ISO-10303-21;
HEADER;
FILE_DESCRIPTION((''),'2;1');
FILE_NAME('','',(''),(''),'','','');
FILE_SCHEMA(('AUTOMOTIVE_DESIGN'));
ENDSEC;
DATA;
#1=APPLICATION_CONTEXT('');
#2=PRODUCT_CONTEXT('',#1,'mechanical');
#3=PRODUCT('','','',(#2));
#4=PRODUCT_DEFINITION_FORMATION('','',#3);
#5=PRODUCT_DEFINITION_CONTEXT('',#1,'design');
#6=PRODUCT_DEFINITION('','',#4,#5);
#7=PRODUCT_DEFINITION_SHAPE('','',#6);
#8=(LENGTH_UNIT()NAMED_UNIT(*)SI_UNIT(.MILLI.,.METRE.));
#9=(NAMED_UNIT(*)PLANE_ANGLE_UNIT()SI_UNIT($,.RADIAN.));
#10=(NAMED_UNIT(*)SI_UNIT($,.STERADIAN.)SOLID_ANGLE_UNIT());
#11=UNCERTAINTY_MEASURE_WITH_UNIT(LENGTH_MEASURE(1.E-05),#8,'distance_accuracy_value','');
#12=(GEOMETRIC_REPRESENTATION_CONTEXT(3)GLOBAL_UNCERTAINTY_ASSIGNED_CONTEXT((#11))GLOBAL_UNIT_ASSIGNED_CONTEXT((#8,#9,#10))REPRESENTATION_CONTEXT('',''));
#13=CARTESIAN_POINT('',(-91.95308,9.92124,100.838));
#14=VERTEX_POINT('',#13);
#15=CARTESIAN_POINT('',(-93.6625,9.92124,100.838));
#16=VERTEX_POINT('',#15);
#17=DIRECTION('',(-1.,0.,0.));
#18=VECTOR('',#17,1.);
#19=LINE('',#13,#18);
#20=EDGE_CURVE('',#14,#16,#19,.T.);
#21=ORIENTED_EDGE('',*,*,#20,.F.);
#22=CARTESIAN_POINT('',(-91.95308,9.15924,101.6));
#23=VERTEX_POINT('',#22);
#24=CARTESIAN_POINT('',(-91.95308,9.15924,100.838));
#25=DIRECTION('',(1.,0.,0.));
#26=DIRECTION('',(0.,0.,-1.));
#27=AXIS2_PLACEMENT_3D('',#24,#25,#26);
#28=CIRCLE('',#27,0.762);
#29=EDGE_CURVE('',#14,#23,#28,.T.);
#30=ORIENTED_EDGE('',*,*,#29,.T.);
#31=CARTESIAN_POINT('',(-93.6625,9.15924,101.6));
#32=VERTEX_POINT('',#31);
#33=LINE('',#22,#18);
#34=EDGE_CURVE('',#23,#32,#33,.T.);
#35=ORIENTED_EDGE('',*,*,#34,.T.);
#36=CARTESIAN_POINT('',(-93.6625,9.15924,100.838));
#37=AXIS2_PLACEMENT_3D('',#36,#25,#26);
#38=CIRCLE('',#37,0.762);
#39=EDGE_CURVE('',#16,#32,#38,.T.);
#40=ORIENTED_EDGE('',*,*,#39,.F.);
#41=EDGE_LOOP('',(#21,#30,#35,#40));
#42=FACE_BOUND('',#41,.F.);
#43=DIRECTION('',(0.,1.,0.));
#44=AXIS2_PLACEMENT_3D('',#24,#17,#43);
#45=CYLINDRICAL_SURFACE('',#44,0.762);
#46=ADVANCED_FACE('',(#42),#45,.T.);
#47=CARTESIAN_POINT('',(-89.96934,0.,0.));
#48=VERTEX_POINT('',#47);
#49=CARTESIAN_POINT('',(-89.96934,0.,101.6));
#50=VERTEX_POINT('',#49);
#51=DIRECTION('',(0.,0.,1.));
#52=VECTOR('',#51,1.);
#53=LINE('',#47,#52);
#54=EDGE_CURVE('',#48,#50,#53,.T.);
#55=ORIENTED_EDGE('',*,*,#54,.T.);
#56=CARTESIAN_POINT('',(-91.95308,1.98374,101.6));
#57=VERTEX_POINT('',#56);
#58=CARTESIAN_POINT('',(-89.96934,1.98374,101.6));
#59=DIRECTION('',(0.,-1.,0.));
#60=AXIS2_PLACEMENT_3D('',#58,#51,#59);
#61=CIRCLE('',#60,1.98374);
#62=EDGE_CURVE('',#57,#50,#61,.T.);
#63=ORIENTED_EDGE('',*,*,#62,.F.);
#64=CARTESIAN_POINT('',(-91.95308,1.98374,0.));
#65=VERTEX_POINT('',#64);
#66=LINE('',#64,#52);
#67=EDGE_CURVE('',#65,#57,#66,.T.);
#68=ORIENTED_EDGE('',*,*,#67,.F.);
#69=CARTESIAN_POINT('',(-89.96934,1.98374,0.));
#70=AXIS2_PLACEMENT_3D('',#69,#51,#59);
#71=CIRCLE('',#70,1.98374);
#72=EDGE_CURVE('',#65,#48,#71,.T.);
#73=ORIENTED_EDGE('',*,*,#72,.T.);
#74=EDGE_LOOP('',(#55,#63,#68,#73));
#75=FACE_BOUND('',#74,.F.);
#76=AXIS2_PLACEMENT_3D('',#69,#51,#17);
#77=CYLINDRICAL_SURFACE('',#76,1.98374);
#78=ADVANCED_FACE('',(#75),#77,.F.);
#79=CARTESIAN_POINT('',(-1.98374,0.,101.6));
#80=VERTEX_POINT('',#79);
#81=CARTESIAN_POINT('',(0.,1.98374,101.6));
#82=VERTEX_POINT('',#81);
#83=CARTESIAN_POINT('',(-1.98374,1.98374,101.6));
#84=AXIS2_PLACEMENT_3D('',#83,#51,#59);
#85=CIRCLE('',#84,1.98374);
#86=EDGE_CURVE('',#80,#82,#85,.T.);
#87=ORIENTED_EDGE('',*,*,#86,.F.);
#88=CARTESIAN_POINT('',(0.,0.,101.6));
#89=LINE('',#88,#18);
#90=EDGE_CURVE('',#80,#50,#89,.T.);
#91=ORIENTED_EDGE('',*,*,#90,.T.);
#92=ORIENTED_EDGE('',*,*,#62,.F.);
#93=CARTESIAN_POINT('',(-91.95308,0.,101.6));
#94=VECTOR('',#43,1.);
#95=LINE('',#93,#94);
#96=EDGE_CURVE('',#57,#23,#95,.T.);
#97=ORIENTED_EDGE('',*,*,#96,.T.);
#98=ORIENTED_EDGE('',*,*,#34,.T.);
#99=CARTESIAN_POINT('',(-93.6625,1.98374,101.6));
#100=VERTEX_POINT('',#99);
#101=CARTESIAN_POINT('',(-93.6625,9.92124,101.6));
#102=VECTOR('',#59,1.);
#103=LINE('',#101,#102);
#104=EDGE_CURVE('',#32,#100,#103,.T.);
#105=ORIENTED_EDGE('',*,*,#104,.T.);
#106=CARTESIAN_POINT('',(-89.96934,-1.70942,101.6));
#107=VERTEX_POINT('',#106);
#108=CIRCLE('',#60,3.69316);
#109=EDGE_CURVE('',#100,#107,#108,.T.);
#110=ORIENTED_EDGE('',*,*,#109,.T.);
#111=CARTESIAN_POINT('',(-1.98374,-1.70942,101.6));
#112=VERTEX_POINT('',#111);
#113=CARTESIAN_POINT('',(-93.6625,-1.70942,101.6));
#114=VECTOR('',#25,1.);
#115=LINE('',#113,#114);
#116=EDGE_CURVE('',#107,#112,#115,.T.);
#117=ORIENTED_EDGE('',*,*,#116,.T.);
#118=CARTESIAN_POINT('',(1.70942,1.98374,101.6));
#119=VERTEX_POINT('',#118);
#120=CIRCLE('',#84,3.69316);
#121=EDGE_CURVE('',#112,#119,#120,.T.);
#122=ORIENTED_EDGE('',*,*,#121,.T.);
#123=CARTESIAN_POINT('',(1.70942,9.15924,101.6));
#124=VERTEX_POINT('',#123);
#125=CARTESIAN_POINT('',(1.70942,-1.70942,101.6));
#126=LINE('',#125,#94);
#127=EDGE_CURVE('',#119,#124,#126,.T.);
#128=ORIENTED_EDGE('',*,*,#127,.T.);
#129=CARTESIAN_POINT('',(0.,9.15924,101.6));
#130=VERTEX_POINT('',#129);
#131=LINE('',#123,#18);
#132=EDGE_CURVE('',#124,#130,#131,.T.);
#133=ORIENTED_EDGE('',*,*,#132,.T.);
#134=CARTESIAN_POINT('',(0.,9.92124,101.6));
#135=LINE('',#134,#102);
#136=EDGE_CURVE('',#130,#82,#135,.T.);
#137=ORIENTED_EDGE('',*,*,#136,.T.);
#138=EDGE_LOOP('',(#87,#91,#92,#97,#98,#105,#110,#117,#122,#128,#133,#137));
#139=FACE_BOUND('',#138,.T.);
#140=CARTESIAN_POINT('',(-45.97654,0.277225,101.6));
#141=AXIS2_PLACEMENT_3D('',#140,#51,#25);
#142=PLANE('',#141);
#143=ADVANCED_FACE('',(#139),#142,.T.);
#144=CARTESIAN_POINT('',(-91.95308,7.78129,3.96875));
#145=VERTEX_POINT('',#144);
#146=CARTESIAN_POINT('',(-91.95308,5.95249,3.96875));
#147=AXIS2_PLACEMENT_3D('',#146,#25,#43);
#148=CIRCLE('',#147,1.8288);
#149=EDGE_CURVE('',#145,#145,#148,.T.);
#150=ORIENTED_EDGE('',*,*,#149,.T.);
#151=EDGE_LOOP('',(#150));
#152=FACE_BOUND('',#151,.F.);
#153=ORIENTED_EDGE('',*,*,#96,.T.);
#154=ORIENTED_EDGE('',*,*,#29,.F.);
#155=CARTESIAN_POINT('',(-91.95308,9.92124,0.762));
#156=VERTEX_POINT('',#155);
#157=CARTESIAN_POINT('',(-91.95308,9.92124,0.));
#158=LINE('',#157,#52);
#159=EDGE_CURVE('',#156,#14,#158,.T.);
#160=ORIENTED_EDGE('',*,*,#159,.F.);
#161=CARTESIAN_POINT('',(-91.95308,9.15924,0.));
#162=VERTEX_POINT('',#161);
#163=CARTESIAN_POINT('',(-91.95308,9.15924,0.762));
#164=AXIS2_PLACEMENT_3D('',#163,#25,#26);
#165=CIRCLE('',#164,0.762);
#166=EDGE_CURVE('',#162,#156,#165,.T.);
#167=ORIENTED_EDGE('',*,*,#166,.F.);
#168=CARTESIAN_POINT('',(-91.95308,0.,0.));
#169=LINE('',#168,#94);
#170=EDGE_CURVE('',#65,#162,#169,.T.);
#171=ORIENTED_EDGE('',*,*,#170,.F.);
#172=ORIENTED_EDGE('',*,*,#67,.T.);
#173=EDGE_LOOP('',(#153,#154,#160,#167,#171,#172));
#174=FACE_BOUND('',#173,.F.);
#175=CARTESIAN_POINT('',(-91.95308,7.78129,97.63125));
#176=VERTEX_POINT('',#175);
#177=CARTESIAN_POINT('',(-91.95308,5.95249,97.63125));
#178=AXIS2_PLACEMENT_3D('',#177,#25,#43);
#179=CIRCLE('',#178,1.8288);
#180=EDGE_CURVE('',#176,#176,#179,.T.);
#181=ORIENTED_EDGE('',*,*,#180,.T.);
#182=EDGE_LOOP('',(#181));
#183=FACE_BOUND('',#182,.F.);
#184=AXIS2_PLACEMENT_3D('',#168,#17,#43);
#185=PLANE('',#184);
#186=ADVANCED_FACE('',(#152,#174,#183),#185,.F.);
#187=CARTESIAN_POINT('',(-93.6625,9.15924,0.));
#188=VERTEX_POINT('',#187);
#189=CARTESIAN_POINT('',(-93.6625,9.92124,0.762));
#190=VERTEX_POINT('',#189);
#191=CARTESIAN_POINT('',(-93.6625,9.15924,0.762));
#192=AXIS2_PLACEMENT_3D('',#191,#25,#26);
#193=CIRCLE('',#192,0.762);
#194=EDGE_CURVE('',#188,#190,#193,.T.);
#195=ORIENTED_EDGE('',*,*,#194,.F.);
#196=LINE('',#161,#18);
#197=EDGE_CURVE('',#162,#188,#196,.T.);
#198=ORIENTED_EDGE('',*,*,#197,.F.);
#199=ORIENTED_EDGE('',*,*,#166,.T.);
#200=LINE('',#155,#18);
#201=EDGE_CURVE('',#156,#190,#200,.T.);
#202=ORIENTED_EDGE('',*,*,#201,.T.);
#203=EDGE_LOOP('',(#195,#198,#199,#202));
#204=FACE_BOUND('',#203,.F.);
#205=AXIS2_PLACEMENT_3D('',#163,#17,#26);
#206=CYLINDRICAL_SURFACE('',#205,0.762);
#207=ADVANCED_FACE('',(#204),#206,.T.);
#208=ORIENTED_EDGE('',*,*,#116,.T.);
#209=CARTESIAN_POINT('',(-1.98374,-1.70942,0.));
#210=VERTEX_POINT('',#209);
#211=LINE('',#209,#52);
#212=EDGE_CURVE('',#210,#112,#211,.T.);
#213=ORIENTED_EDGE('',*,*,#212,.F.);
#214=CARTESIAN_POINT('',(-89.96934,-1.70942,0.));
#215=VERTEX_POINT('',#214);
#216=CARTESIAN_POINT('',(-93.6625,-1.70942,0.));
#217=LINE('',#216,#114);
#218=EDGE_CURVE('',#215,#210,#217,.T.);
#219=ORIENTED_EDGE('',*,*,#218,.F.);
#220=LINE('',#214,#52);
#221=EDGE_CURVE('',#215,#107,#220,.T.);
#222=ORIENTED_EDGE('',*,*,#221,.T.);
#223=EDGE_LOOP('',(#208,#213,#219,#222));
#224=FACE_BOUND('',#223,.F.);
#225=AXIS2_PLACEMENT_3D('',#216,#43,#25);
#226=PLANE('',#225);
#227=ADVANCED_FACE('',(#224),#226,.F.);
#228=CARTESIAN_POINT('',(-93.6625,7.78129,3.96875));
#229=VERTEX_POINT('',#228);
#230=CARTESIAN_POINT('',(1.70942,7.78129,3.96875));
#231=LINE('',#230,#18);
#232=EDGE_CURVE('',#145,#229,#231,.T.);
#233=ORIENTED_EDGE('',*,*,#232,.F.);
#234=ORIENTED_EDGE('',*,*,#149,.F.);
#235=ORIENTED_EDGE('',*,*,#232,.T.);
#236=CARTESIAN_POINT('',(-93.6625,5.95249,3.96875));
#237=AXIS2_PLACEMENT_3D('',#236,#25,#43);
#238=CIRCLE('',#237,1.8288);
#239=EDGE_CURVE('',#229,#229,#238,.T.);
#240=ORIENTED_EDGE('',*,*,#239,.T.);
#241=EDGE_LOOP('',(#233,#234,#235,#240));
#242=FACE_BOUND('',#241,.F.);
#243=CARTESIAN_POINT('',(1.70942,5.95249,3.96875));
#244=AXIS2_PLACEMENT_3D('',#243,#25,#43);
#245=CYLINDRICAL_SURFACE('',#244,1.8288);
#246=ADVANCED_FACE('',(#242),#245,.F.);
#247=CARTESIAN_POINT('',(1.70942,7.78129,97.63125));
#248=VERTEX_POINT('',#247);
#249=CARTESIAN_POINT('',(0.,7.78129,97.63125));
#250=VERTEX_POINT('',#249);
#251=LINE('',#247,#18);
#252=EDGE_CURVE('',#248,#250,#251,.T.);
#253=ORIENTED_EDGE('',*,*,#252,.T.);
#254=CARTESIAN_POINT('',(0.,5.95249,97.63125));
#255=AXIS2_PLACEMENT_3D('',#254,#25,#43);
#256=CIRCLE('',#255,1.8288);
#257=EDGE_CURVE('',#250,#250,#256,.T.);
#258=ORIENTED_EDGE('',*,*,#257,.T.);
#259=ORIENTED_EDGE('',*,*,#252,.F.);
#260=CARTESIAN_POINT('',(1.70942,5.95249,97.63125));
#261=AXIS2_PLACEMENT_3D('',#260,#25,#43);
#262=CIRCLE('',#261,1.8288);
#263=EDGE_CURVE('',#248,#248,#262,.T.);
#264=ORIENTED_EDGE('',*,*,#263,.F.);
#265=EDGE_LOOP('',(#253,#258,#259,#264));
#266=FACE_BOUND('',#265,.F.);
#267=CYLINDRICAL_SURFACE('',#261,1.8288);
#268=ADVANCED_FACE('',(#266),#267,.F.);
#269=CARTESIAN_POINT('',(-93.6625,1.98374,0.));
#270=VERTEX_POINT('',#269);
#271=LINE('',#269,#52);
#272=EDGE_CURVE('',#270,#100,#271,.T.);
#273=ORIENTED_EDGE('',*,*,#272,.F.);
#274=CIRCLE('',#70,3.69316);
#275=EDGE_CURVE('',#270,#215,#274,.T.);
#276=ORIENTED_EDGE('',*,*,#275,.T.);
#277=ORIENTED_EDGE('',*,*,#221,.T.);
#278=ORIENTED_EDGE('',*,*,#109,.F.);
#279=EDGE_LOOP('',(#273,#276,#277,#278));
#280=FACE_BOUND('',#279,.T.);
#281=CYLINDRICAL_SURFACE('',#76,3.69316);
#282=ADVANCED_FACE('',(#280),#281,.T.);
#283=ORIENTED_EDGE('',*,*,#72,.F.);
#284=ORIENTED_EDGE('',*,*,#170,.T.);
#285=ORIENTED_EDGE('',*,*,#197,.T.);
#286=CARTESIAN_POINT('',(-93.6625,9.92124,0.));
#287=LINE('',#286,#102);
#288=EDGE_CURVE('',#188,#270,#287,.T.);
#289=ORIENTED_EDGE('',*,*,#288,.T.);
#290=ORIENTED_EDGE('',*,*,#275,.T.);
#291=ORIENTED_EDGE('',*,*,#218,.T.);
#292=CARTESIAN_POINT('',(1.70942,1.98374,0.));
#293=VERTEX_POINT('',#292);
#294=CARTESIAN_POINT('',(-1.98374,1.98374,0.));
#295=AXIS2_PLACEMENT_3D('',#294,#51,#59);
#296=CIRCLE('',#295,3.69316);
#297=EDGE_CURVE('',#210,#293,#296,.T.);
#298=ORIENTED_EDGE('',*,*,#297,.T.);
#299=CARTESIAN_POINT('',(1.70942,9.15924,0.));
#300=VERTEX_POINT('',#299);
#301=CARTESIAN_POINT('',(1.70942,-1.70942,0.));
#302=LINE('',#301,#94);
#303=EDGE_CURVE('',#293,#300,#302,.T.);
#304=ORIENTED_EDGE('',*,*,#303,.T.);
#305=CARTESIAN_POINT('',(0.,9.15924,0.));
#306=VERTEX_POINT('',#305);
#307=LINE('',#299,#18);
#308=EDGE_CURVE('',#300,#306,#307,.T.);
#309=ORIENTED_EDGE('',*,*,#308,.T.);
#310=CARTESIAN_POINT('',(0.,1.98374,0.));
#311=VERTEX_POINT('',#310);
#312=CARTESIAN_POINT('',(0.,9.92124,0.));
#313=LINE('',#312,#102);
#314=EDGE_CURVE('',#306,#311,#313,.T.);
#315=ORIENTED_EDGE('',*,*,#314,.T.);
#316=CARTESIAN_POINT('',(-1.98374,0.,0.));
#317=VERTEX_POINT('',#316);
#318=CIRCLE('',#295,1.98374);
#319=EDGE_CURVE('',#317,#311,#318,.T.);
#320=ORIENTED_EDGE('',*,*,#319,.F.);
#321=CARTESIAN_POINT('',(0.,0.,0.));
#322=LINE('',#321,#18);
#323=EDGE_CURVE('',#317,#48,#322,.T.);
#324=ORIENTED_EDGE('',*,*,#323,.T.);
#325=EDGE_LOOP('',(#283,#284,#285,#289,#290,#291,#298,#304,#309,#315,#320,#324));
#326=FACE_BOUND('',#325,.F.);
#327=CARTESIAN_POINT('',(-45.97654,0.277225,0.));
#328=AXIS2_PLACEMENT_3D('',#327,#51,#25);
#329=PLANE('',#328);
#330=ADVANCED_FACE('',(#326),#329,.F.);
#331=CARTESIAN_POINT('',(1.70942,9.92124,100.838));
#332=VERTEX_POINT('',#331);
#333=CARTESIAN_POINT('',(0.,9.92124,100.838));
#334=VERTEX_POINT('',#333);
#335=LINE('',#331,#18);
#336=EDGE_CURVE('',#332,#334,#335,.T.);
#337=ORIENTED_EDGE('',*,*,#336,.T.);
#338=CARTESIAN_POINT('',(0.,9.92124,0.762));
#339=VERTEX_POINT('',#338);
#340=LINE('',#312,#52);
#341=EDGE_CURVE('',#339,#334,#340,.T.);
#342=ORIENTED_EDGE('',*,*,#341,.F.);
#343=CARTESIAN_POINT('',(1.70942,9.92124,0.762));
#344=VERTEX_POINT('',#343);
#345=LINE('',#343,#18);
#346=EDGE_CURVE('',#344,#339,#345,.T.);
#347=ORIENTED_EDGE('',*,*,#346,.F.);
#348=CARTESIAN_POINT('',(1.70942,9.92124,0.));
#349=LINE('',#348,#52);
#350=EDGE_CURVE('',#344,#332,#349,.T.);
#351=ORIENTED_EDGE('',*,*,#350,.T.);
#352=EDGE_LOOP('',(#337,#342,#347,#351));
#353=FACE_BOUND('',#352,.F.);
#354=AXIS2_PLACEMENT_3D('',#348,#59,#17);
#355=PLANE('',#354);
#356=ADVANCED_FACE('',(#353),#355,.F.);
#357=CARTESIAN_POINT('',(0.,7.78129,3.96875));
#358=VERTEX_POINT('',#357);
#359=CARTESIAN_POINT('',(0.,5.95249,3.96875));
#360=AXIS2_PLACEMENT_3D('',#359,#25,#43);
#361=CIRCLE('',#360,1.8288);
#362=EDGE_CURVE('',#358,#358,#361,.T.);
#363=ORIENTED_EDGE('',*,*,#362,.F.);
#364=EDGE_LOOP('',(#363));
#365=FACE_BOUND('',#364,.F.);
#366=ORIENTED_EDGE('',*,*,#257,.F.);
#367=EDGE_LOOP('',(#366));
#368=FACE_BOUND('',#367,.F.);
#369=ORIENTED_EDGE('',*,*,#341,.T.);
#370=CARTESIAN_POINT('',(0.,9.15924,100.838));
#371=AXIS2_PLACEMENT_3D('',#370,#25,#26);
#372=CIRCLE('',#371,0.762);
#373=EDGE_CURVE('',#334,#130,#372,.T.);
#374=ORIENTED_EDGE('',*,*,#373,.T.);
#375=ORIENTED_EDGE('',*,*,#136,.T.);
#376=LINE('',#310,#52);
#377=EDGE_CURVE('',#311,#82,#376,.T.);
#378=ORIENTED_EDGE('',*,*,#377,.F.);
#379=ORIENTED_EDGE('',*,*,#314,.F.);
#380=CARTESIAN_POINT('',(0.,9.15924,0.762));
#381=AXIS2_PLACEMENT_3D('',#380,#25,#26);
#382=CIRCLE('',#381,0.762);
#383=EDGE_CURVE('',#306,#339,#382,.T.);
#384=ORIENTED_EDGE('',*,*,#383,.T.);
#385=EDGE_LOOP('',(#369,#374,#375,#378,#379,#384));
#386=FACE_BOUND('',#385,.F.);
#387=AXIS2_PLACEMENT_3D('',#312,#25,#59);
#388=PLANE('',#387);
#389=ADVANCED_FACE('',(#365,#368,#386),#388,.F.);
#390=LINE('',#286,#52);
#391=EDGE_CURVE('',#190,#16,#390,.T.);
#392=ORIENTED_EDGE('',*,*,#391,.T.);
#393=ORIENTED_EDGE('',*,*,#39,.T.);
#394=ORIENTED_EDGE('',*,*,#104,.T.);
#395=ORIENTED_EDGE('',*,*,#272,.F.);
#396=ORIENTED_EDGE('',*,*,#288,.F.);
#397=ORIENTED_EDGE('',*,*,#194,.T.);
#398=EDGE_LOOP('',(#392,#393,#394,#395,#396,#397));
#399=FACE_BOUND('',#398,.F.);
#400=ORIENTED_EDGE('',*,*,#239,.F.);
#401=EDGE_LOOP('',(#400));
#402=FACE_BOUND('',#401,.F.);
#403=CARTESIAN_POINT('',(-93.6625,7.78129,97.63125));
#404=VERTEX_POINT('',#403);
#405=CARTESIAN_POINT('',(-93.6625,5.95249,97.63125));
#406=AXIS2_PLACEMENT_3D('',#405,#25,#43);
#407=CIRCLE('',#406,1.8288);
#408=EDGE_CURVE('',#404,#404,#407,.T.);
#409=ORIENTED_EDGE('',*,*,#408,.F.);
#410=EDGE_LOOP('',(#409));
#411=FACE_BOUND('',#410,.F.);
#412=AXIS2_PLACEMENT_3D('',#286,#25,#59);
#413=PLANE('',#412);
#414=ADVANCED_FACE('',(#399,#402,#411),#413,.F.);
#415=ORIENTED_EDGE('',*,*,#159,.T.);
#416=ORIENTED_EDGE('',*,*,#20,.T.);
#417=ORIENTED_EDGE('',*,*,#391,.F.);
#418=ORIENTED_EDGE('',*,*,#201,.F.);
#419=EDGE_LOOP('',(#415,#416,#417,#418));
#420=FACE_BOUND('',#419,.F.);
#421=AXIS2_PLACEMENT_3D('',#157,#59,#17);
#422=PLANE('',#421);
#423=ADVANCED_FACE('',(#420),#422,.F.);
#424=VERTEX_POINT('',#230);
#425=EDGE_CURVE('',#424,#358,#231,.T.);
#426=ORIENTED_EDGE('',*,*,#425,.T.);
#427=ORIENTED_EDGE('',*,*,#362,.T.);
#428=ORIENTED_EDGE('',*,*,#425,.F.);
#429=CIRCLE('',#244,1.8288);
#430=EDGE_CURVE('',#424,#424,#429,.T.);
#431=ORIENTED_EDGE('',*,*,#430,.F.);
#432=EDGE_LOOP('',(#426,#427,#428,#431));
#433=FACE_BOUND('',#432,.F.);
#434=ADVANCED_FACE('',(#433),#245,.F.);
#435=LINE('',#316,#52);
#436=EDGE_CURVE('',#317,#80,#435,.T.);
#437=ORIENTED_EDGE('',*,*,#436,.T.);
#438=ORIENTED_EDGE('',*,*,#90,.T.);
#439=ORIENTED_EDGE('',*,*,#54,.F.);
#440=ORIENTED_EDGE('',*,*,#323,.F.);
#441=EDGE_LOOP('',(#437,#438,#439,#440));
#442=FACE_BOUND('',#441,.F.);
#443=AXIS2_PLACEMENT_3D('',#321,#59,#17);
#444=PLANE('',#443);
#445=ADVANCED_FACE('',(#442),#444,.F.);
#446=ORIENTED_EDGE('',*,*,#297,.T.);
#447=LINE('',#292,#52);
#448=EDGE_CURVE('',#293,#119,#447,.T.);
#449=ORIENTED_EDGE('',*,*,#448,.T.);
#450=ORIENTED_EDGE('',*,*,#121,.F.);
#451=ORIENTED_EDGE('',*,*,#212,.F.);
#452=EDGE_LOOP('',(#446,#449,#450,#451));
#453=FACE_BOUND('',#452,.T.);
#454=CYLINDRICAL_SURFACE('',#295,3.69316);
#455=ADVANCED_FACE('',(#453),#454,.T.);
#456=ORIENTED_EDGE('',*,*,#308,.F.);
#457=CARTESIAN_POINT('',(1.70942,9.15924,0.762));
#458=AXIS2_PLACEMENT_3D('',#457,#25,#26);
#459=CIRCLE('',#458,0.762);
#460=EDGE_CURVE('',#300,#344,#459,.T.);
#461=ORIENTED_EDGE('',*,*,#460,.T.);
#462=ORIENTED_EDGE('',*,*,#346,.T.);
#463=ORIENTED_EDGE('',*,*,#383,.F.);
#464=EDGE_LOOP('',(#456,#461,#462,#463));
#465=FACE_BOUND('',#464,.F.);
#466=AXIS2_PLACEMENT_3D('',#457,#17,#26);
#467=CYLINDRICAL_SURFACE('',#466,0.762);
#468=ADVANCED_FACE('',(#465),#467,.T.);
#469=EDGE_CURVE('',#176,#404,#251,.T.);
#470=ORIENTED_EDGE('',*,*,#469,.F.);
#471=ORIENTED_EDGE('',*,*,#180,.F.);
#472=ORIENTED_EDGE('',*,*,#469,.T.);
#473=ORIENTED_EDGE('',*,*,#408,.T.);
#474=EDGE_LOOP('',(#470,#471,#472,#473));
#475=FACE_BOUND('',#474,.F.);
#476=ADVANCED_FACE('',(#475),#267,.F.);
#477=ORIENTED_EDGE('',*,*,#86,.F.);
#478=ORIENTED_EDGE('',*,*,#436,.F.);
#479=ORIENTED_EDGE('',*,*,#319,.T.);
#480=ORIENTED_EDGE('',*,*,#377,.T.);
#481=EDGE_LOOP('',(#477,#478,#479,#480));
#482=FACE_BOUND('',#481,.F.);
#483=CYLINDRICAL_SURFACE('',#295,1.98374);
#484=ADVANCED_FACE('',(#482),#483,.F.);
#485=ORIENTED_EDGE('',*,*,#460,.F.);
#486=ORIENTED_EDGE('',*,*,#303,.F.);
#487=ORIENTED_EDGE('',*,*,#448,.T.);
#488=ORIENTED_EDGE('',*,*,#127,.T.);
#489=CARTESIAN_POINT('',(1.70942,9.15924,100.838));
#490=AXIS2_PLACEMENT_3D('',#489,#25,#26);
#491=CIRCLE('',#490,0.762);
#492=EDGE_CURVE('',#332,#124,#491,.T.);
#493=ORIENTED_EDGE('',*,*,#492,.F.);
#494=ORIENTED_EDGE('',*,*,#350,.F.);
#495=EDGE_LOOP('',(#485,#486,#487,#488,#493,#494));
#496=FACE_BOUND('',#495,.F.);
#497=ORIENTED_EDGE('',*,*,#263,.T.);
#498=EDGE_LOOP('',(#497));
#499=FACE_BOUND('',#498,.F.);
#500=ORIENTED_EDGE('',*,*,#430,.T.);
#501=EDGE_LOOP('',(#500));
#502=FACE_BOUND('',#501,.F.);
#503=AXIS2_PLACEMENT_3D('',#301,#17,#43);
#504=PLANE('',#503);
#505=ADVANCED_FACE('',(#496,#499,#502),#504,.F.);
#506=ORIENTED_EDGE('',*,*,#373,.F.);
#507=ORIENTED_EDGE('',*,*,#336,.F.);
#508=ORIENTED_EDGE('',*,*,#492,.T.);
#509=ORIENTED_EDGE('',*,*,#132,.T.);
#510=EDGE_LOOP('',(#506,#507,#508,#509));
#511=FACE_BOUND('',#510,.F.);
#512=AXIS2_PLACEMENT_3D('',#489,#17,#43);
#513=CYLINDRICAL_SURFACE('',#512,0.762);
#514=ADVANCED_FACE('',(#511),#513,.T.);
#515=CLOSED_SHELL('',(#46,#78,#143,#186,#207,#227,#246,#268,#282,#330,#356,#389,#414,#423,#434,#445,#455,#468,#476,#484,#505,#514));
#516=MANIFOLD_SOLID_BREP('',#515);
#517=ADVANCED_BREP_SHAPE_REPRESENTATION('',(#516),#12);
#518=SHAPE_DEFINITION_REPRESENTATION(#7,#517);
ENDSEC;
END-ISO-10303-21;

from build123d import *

# Parameters (mm, degrees)
F1_DEPTH = 101.6
F2_R     = 3.69316
F3_R     = 1.98374
F4_R     = 1.8288
F5_DEPTH = 95.37192
F6_R     = 0.762


with BuildPart() as f1:
    # F0 (on Top) → F1 (new body)
    with BuildSketch(Plane.XY):
        Polygon((0, 9.92124), (0, 0), (-91.95308, 0), (-91.95308, 9.92124), (-93.6625, 9.92124), (-93.6625, -1.70942), (1.70942, -1.70942), (1.70942, 9.92124), align=None)
    extrude(amount=F1_DEPTH)

    # F2
    f2_edges = [f1.edges().sort_by_distance(p)[0] for p in [
        (1.70942, -1.70942, 50.8),
        (-93.6625, -1.70942, 50.8),
    ]]
    fillet(f2_edges, radius=F2_R)

    # F3
    f3_edges = [f1.edges().sort_by_distance(p)[0] for p in [
        (0, 0, 50.8),
        (-91.95308, 0, 50.8),
    ]]
    fillet(f3_edges, radius=F3_R)

    # F4 (on face) → F5 (cut, through all)
    with BuildSketch(Plane.YZ.offset(1.70942)):
        with Locations((5.95249, 97.63125)):
            Circle(F4_R)
        with Locations((5.95249, 3.96875)):
            Circle(F4_R)
    extrude(amount=-F5_DEPTH, mode=Mode.SUBTRACT)

    # F6
    f6_edges = [f1.edges().sort_by_distance(p)[0] for p in [
        (-92.80779, 9.92124, 101.6),
        (-92.80779, 9.92124, 0),
        (0.85471, 9.92124, 0),
        (0.85471, 9.92124, 101.6),
    ]]
    fillet(f6_edges, radius=F6_R)


solid = f1.part
